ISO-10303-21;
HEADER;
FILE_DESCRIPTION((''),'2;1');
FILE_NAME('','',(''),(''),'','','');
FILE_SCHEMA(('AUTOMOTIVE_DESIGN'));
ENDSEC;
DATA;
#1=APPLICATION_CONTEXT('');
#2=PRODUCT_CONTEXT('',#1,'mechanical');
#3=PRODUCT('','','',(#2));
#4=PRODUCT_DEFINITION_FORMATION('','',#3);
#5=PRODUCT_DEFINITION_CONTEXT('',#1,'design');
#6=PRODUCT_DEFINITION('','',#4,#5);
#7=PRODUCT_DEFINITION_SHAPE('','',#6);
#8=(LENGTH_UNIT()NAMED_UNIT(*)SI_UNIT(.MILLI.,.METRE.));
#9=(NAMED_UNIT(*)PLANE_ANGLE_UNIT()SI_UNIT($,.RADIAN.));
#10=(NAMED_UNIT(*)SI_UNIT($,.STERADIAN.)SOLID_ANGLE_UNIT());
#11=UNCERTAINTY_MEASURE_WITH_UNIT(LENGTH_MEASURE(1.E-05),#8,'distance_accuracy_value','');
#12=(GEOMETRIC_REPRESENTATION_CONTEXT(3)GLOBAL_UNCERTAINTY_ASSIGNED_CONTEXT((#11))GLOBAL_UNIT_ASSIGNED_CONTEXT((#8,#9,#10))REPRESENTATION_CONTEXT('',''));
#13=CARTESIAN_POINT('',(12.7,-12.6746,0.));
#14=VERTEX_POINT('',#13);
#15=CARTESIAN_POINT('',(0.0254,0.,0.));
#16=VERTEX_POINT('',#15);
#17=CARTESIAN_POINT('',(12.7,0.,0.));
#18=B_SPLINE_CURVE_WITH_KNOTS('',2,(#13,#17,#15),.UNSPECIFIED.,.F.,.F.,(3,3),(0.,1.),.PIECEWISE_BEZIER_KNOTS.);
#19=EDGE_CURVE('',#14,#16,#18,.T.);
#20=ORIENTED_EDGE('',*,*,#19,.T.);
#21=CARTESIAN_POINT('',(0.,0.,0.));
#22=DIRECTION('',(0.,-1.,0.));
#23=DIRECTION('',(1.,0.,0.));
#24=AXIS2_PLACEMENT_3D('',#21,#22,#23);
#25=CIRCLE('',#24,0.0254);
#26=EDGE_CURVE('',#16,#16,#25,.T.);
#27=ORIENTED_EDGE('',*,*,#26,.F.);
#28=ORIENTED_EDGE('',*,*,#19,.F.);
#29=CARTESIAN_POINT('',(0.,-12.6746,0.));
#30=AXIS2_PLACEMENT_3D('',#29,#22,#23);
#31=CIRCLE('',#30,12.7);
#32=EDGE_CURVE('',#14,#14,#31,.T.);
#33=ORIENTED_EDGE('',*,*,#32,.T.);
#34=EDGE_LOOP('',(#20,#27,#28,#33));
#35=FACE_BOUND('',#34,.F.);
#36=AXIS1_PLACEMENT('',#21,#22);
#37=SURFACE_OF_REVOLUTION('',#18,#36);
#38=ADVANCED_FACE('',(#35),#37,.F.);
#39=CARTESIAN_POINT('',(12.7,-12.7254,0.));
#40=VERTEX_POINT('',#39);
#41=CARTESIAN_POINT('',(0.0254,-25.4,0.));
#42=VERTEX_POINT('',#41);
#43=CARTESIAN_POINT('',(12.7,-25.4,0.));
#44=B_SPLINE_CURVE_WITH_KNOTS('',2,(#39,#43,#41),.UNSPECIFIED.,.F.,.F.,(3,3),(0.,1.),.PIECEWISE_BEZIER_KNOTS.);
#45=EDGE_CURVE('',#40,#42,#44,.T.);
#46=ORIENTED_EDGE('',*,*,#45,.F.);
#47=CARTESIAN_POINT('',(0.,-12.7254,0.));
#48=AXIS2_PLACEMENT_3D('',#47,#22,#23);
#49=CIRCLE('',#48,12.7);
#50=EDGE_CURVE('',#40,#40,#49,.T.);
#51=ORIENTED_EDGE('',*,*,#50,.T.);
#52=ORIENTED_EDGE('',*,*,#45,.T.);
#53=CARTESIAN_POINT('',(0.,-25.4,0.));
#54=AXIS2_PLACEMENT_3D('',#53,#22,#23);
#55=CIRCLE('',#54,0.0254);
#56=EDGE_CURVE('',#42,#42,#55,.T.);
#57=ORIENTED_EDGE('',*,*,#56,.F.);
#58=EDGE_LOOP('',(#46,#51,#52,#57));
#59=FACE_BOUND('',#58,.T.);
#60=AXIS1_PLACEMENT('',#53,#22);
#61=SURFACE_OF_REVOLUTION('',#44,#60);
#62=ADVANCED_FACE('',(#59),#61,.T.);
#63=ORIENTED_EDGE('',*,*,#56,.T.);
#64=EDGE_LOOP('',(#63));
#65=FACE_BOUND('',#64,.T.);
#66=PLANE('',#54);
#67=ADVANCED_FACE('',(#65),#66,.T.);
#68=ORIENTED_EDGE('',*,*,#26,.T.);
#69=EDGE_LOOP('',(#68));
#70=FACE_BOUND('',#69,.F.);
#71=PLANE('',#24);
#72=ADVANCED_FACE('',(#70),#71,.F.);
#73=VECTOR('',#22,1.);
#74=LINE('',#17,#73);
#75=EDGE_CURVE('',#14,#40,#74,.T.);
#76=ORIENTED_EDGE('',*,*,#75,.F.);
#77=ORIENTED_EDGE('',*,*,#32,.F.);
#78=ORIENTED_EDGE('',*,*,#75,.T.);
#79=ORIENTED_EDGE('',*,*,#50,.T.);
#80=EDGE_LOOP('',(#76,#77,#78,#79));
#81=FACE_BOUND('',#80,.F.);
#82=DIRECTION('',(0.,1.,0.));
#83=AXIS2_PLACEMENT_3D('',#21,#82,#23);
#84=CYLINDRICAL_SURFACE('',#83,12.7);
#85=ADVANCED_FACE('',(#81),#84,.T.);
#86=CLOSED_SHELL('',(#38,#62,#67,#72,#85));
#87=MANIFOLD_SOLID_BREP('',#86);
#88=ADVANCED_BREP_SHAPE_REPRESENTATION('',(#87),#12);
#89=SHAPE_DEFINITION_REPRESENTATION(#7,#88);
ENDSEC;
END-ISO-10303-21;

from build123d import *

# Parameters (mm, degrees)
F0_R     = 12.7
F1_DEPTH = 25.4


# Not quite as in the source:
# - a fillet or chamfer that OpenCascade refuses, or shapes differently, is made with other operations: its cross-section is extruded or revolved along the edge and cut away or added


with BuildPart() as f1:
    # F0 (on Front) → F1 (new body)
    with BuildSketch(Plane.XZ):
        Circle(F0_R)
    extrude(amount=F1_DEPTH)

    # F2: fillet of radius 12.6746 on 2 edges, made by hand

    # F2_s1 → F2_t2 (revolve, cut)
    with BuildSketch(Plane.XY):
        with BuildLine():
            add(Edge.make_bspline(
                [(12.7, -12.7254), (12.7, -25.4), (0.0254, -25.4)],
                knots=[0, 0, 0, 1, 1, 1], degree=2, weights=[1, 1, 1]))
            Line((0.0254, -25.4), (12.7, -25.4))
            Line((12.7, -25.4), (12.7, -12.7254))
        make_face()
    revolve(axis=Axis((0, -25.4, 0), (0, -1, 0)), mode=Mode.SUBTRACT)

    # F2_s3 → F2_t4 (revolve, cut)
    with BuildSketch(Plane.XY):
        with BuildLine():
            add(Edge.make_bspline(
                [(12.7, -12.6746), (12.7, 0), (0.0254, 0)],
                knots=[0, 0, 0, 1, 1, 1], degree=2, weights=[1, 1, 1]))
            Line((0.0254, 0), (12.7, 0))
            Line((12.7, 0), (12.7, -12.6746))
        make_face()
    revolve(axis=Axis((0, 0, 0), (0, -1, 0)), mode=Mode.SUBTRACT)


solid = f1.part
